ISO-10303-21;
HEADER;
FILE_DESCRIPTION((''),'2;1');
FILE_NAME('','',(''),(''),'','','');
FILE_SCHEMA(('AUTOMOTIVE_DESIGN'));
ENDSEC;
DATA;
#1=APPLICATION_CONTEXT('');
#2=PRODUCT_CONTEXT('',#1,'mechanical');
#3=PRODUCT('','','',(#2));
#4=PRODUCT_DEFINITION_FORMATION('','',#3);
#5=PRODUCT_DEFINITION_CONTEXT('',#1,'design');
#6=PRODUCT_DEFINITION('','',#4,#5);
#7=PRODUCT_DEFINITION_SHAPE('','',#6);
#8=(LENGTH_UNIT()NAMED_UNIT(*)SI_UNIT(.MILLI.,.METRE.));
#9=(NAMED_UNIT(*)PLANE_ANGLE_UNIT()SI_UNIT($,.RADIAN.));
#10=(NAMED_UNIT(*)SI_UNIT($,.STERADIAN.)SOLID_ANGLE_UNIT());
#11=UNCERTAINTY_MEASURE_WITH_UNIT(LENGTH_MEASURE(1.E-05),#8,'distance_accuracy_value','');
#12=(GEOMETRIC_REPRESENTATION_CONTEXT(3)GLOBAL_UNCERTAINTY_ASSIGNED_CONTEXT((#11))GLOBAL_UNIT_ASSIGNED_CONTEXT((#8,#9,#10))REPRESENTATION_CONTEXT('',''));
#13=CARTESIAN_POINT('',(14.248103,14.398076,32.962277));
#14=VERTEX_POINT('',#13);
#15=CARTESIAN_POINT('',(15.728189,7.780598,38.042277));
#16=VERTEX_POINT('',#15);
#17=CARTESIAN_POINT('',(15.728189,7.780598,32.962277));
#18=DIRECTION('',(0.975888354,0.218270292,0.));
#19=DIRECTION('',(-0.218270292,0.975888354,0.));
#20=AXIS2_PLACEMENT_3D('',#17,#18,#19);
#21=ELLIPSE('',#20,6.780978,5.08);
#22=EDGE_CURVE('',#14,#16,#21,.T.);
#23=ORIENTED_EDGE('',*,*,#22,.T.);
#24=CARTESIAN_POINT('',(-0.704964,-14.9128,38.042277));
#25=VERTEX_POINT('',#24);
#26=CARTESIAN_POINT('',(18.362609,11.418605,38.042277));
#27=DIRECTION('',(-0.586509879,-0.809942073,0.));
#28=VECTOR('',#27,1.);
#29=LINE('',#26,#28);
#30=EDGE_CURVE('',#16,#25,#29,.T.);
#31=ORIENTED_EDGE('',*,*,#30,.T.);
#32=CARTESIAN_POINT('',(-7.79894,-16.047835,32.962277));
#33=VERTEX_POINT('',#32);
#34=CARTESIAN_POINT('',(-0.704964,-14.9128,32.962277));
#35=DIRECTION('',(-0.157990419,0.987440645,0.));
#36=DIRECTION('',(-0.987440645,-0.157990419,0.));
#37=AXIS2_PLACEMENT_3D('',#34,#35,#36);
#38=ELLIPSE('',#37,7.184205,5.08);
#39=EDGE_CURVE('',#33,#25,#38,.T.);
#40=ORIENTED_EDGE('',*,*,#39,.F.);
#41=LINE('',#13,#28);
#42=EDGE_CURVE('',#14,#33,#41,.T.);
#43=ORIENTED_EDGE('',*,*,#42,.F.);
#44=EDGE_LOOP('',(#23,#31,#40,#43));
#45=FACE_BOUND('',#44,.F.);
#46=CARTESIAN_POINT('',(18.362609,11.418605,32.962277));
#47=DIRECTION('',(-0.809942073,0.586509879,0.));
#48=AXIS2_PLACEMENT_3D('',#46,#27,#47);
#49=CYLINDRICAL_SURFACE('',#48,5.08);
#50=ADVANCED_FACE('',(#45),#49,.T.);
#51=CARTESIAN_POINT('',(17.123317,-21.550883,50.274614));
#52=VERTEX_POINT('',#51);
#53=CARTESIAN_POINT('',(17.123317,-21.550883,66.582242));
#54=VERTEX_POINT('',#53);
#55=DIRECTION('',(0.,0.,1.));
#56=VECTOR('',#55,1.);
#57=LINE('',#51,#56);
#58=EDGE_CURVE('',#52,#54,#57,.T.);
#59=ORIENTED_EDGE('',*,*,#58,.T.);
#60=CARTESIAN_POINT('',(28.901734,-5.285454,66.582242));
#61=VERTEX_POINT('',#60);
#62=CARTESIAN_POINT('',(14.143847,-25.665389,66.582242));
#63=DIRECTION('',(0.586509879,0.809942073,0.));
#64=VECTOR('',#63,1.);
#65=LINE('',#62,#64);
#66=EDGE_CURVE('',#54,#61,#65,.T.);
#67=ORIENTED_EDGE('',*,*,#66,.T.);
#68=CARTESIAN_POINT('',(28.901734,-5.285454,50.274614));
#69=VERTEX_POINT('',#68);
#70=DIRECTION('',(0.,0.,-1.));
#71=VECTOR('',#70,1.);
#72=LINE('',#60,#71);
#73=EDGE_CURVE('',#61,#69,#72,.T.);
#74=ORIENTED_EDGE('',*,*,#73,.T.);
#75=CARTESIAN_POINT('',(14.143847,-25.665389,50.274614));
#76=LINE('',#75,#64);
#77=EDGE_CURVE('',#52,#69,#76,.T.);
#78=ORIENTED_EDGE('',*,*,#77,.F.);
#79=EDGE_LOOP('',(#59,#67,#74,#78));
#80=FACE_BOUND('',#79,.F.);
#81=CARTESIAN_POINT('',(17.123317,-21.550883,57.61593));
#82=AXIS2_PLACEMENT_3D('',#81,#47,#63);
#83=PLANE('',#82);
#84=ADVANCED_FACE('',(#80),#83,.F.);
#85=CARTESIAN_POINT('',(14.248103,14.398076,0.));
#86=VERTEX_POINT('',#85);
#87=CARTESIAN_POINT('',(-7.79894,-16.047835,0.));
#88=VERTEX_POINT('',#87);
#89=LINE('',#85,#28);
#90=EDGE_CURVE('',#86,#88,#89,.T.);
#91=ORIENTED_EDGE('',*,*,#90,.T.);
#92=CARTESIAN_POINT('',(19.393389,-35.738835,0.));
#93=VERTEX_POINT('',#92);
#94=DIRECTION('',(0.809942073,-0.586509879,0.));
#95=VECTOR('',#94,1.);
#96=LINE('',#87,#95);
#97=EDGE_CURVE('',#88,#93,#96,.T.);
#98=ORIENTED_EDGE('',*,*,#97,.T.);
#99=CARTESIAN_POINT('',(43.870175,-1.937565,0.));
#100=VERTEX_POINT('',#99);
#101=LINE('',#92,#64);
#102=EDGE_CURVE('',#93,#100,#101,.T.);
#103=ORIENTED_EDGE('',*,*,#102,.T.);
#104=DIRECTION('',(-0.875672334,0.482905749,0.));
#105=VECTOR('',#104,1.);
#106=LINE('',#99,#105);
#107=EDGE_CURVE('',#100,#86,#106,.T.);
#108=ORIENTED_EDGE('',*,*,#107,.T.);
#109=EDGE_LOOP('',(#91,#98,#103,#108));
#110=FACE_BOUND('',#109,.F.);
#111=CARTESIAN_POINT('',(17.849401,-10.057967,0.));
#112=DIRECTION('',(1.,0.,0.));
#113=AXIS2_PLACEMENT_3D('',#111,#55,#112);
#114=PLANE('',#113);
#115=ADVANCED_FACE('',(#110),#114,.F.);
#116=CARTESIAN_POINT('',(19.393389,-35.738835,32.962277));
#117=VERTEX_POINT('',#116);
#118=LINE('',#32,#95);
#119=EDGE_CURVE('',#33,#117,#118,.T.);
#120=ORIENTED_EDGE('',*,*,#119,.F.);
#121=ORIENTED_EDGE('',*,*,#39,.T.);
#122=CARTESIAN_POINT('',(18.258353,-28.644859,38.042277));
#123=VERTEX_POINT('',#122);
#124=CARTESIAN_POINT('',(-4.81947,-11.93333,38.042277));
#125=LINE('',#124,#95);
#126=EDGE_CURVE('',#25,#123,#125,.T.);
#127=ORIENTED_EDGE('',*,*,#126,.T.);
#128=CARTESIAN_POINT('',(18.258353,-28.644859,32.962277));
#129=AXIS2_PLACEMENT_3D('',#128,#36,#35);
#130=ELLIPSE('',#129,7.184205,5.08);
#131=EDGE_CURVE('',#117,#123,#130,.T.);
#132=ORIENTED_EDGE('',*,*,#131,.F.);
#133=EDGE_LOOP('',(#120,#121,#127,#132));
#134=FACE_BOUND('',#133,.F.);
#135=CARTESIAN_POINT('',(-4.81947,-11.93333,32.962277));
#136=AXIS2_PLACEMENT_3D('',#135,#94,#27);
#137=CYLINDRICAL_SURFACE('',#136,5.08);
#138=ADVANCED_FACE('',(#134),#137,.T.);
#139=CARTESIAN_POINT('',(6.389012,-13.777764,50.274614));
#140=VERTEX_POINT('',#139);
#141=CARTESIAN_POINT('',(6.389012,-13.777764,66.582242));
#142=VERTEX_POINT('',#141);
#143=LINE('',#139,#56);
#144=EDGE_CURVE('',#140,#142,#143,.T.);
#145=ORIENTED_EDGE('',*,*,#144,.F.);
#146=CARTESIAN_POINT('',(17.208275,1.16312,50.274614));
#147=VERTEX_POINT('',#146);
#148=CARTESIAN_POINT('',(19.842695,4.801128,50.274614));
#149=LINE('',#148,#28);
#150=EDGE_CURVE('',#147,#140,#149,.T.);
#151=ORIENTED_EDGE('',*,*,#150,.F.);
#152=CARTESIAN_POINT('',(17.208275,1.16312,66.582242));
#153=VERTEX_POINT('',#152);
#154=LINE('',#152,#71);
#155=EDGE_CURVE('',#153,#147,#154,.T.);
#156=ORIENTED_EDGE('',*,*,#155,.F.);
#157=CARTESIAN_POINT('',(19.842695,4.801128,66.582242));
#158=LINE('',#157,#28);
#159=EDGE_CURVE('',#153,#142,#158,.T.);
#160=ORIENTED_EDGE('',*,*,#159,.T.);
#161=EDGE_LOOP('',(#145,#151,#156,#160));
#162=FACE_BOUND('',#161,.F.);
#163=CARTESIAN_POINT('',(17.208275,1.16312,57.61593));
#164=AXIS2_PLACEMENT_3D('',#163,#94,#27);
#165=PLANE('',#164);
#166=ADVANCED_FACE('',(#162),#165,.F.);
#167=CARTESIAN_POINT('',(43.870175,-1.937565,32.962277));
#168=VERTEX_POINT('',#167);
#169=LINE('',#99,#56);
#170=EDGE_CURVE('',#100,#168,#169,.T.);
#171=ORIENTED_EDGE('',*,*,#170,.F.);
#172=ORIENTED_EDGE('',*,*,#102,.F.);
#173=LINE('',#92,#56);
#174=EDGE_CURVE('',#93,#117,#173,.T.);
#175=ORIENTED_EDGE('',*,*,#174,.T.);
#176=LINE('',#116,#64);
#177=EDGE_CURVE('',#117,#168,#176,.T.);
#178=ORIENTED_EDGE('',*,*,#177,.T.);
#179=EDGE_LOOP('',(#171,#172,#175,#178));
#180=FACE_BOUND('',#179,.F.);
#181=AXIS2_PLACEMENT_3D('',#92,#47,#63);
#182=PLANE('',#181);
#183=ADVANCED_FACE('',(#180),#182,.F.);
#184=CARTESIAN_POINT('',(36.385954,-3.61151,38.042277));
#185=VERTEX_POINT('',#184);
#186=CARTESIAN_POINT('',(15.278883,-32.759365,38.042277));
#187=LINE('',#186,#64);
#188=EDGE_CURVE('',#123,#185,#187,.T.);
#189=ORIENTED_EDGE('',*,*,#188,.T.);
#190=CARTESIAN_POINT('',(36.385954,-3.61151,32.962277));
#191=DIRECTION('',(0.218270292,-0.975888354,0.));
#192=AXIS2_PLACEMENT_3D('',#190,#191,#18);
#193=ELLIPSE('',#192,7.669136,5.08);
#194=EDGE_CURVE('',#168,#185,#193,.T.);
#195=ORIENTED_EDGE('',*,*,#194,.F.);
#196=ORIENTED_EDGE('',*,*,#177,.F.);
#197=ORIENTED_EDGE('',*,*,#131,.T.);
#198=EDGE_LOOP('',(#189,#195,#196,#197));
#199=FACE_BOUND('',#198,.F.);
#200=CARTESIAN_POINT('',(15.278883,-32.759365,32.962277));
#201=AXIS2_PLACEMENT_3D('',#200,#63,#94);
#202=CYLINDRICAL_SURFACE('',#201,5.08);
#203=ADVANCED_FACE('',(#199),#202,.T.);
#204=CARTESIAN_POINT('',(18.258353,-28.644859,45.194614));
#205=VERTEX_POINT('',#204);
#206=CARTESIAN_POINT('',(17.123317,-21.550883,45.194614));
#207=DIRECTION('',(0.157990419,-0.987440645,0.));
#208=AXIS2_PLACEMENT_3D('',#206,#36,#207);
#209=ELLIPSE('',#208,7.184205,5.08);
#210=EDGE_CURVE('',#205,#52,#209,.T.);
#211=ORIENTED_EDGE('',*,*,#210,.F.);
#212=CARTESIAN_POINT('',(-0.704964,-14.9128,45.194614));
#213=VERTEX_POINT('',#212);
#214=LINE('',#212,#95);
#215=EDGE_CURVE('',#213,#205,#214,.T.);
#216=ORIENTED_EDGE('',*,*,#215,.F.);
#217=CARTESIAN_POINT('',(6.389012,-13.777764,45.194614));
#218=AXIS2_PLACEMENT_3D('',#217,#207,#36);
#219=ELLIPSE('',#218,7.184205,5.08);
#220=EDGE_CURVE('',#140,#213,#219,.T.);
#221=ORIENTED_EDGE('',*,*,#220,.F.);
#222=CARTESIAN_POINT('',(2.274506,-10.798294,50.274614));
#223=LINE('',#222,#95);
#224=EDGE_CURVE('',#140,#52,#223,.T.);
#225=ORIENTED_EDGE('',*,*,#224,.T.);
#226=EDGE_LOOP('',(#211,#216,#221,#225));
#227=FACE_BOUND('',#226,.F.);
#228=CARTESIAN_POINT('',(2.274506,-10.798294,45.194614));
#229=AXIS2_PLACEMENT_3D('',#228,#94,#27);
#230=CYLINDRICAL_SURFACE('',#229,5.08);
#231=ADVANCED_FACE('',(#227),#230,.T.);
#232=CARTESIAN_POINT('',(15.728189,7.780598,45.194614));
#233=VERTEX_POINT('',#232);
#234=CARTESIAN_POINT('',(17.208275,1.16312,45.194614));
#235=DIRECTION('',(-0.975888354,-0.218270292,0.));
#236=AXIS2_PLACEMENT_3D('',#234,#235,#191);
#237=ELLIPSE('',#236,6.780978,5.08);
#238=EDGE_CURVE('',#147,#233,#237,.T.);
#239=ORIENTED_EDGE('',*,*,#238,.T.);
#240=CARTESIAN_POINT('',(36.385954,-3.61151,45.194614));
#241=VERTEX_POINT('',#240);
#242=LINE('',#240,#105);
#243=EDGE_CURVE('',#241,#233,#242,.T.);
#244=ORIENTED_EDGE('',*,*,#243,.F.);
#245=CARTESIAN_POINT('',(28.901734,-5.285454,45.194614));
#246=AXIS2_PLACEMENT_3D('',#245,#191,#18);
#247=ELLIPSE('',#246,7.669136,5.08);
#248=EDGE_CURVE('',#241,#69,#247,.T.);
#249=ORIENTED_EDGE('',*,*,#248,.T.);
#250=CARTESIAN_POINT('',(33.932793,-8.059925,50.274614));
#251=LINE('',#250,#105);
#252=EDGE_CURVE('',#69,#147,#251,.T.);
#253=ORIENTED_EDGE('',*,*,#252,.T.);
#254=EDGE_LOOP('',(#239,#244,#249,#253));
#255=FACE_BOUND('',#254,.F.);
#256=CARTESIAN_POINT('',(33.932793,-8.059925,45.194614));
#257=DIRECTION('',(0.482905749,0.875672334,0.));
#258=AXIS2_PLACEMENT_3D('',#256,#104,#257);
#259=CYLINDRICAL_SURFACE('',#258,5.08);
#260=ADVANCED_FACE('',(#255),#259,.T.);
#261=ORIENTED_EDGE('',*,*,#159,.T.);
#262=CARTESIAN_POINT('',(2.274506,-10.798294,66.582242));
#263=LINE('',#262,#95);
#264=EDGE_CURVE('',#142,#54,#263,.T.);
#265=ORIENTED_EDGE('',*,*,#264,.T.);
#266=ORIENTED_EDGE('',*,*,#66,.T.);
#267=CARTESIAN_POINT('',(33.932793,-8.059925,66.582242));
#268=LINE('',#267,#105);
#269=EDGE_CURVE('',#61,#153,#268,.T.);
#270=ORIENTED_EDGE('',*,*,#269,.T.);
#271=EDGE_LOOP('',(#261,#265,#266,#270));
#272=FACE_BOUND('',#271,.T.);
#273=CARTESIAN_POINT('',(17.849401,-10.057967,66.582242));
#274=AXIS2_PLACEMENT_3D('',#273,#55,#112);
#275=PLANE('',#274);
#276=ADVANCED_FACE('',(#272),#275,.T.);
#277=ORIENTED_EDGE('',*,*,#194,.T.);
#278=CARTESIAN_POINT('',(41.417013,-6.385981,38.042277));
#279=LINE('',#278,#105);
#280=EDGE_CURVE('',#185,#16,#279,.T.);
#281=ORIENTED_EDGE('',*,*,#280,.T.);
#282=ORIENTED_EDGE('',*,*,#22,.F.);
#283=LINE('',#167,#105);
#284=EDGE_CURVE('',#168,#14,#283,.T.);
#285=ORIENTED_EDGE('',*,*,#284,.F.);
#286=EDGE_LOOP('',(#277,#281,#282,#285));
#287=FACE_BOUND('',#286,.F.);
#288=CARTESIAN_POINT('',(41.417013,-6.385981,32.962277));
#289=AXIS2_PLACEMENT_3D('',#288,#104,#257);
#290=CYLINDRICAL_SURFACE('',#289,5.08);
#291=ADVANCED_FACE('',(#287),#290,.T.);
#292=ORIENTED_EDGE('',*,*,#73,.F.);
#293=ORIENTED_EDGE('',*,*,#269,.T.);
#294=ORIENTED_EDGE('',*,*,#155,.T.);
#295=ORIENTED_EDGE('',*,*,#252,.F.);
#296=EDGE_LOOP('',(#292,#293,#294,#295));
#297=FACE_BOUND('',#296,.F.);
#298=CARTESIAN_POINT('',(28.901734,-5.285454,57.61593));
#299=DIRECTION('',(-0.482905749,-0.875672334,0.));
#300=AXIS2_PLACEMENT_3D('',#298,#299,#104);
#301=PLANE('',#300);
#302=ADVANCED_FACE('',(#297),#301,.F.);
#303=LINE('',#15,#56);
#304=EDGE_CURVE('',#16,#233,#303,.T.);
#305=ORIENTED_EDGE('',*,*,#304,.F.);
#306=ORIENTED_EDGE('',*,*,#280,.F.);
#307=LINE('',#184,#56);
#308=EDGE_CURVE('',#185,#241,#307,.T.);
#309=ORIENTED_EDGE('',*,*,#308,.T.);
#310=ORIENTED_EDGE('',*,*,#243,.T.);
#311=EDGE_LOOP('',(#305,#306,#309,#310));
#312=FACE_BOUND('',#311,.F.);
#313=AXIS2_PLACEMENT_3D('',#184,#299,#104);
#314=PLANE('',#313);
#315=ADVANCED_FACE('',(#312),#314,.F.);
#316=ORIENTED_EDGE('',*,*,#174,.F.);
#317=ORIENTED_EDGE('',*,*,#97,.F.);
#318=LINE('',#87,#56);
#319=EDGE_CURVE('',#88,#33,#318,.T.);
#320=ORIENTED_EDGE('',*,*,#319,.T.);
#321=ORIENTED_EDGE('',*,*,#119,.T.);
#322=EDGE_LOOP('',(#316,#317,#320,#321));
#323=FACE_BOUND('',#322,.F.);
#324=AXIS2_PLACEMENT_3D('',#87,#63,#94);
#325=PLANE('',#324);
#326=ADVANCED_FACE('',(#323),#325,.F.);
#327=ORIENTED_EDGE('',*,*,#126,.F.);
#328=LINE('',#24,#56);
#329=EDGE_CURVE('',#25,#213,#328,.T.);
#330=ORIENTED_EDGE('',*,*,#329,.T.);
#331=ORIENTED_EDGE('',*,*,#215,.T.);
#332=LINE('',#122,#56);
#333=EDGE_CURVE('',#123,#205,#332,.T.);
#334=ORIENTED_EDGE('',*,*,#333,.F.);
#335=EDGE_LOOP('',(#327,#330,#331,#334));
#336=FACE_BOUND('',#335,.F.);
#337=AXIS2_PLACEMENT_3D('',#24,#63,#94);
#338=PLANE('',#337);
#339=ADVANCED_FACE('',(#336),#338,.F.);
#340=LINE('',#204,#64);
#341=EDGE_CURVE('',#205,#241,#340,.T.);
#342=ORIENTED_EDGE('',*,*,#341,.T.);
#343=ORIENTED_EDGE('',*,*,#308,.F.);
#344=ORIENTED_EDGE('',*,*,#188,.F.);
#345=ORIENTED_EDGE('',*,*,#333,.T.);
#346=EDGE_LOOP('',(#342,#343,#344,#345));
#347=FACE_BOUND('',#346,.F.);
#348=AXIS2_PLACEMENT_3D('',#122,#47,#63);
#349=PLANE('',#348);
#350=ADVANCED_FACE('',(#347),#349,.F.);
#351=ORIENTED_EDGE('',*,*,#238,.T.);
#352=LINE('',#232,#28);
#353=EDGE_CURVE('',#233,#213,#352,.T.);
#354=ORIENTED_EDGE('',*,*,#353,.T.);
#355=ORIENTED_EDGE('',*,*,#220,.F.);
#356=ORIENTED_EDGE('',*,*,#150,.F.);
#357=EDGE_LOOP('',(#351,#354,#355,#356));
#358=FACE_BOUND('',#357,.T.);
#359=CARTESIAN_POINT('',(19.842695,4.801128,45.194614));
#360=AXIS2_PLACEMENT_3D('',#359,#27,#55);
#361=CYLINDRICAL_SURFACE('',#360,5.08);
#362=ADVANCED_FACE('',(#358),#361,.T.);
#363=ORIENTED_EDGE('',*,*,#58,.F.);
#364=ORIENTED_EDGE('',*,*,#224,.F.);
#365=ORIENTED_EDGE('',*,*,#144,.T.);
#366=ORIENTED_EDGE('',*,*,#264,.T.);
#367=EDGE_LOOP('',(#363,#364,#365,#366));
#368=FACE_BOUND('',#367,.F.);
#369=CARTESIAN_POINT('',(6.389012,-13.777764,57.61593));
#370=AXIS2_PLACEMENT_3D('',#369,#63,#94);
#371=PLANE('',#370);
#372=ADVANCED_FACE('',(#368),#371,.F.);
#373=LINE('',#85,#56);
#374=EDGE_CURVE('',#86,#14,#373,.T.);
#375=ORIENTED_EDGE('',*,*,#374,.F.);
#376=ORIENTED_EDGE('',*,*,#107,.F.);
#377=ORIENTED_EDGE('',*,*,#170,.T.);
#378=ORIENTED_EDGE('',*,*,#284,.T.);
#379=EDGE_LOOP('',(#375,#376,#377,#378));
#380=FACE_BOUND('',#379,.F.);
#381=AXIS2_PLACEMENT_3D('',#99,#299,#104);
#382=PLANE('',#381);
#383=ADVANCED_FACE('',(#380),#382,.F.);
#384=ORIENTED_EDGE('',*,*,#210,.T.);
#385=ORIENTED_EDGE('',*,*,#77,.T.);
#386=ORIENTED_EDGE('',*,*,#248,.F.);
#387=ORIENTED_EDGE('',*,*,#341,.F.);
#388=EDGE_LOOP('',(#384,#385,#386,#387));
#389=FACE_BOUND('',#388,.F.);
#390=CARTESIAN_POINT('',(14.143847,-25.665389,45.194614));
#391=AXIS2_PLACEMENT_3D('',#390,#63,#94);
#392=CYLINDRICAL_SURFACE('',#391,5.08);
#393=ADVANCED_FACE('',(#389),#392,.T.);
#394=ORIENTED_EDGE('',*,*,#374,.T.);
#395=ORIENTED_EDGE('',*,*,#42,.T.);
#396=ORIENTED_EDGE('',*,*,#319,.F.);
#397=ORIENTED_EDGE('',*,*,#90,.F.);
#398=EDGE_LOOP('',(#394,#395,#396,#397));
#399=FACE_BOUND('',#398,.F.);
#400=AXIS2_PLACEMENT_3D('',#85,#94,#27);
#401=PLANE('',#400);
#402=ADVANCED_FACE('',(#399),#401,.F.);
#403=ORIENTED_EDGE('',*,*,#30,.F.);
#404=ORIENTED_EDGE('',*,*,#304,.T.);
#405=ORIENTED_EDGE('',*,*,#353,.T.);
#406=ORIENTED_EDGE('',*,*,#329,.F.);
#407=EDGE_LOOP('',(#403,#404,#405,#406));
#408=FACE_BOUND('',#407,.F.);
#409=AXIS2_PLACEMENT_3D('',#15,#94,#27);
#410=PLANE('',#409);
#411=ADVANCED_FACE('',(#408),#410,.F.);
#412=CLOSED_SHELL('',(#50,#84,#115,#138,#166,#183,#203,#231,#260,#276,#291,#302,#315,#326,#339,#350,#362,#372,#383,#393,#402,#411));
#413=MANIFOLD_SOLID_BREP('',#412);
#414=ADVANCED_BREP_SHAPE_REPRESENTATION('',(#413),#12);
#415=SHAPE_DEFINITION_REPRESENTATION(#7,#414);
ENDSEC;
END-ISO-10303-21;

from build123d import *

# Parameters (mm, degrees)
F1_DEPTH = 38.0422770977
F2_R     = 5.08
F3_DEPTH = 12.232337147
F4_R     = 5.08
F5_DEPTH = 7.3413159698
F6_DEPTH = 8.9663118124


with BuildPart() as f1:
    # F0 (on Top) → F1 (new body)
    with BuildSketch(Plane.XY):
        Polygon((43.8701745906, -1.9375651716), (14.2481029034, 14.3980756402), (-7.7989399433, -16.04783535), (19.3933885201, -35.7388352654), align=None)
    extrude(amount=F1_DEPTH)

    # F2
    f2_edges = [f1.edges().sort_by_distance(p)[0] for p in [
        (31.631782, -18.8382, 38.042277),
        (29.059139, 6.230255, 38.042277),
        (3.224581, -0.82488, 38.042277),
        (5.797224, -25.893335, 38.042277),
    ]]
    fillet(f2_edges, radius=F2_R)

    # F3 (add): a face of the model
    f3_faces = [f1.faces().sort_by_distance(p)[0] for p in [
        (17.578761895, -9.9497918988, 38.0422770977),
    ]]
    extrude(f3_faces, amount=F3_DEPTH)

    # F4
    f4_edges = [f1.edges().sort_by_distance(p)[0] for p in [
        (7.511612, -3.566101, 50.274614),
        (8.776694, -21.77883, 50.274614),
        (27.322154, -16.128185, 50.274614),
        (26.057072, 2.084544, 50.274614),
    ]]
    fillet(f4_edges, radius=F4_R)

    # F5 (add): a face of the model
    f5_faces = [f1.faces().sort_by_distance(p)[0] for p in [
        (17.4849129571, -9.9130484235, 50.2746142447),
    ]]
    extrude(f5_faces, amount=F5_DEPTH)

    # F6 (add): a face of the model
    f6_faces = [f1.faces().sort_by_distance(p)[0] for p in [
        (17.4849129571, -9.9130484235, 57.6159302145),
    ]]
    extrude(f6_faces, amount=F6_DEPTH)


solid = f1.part
